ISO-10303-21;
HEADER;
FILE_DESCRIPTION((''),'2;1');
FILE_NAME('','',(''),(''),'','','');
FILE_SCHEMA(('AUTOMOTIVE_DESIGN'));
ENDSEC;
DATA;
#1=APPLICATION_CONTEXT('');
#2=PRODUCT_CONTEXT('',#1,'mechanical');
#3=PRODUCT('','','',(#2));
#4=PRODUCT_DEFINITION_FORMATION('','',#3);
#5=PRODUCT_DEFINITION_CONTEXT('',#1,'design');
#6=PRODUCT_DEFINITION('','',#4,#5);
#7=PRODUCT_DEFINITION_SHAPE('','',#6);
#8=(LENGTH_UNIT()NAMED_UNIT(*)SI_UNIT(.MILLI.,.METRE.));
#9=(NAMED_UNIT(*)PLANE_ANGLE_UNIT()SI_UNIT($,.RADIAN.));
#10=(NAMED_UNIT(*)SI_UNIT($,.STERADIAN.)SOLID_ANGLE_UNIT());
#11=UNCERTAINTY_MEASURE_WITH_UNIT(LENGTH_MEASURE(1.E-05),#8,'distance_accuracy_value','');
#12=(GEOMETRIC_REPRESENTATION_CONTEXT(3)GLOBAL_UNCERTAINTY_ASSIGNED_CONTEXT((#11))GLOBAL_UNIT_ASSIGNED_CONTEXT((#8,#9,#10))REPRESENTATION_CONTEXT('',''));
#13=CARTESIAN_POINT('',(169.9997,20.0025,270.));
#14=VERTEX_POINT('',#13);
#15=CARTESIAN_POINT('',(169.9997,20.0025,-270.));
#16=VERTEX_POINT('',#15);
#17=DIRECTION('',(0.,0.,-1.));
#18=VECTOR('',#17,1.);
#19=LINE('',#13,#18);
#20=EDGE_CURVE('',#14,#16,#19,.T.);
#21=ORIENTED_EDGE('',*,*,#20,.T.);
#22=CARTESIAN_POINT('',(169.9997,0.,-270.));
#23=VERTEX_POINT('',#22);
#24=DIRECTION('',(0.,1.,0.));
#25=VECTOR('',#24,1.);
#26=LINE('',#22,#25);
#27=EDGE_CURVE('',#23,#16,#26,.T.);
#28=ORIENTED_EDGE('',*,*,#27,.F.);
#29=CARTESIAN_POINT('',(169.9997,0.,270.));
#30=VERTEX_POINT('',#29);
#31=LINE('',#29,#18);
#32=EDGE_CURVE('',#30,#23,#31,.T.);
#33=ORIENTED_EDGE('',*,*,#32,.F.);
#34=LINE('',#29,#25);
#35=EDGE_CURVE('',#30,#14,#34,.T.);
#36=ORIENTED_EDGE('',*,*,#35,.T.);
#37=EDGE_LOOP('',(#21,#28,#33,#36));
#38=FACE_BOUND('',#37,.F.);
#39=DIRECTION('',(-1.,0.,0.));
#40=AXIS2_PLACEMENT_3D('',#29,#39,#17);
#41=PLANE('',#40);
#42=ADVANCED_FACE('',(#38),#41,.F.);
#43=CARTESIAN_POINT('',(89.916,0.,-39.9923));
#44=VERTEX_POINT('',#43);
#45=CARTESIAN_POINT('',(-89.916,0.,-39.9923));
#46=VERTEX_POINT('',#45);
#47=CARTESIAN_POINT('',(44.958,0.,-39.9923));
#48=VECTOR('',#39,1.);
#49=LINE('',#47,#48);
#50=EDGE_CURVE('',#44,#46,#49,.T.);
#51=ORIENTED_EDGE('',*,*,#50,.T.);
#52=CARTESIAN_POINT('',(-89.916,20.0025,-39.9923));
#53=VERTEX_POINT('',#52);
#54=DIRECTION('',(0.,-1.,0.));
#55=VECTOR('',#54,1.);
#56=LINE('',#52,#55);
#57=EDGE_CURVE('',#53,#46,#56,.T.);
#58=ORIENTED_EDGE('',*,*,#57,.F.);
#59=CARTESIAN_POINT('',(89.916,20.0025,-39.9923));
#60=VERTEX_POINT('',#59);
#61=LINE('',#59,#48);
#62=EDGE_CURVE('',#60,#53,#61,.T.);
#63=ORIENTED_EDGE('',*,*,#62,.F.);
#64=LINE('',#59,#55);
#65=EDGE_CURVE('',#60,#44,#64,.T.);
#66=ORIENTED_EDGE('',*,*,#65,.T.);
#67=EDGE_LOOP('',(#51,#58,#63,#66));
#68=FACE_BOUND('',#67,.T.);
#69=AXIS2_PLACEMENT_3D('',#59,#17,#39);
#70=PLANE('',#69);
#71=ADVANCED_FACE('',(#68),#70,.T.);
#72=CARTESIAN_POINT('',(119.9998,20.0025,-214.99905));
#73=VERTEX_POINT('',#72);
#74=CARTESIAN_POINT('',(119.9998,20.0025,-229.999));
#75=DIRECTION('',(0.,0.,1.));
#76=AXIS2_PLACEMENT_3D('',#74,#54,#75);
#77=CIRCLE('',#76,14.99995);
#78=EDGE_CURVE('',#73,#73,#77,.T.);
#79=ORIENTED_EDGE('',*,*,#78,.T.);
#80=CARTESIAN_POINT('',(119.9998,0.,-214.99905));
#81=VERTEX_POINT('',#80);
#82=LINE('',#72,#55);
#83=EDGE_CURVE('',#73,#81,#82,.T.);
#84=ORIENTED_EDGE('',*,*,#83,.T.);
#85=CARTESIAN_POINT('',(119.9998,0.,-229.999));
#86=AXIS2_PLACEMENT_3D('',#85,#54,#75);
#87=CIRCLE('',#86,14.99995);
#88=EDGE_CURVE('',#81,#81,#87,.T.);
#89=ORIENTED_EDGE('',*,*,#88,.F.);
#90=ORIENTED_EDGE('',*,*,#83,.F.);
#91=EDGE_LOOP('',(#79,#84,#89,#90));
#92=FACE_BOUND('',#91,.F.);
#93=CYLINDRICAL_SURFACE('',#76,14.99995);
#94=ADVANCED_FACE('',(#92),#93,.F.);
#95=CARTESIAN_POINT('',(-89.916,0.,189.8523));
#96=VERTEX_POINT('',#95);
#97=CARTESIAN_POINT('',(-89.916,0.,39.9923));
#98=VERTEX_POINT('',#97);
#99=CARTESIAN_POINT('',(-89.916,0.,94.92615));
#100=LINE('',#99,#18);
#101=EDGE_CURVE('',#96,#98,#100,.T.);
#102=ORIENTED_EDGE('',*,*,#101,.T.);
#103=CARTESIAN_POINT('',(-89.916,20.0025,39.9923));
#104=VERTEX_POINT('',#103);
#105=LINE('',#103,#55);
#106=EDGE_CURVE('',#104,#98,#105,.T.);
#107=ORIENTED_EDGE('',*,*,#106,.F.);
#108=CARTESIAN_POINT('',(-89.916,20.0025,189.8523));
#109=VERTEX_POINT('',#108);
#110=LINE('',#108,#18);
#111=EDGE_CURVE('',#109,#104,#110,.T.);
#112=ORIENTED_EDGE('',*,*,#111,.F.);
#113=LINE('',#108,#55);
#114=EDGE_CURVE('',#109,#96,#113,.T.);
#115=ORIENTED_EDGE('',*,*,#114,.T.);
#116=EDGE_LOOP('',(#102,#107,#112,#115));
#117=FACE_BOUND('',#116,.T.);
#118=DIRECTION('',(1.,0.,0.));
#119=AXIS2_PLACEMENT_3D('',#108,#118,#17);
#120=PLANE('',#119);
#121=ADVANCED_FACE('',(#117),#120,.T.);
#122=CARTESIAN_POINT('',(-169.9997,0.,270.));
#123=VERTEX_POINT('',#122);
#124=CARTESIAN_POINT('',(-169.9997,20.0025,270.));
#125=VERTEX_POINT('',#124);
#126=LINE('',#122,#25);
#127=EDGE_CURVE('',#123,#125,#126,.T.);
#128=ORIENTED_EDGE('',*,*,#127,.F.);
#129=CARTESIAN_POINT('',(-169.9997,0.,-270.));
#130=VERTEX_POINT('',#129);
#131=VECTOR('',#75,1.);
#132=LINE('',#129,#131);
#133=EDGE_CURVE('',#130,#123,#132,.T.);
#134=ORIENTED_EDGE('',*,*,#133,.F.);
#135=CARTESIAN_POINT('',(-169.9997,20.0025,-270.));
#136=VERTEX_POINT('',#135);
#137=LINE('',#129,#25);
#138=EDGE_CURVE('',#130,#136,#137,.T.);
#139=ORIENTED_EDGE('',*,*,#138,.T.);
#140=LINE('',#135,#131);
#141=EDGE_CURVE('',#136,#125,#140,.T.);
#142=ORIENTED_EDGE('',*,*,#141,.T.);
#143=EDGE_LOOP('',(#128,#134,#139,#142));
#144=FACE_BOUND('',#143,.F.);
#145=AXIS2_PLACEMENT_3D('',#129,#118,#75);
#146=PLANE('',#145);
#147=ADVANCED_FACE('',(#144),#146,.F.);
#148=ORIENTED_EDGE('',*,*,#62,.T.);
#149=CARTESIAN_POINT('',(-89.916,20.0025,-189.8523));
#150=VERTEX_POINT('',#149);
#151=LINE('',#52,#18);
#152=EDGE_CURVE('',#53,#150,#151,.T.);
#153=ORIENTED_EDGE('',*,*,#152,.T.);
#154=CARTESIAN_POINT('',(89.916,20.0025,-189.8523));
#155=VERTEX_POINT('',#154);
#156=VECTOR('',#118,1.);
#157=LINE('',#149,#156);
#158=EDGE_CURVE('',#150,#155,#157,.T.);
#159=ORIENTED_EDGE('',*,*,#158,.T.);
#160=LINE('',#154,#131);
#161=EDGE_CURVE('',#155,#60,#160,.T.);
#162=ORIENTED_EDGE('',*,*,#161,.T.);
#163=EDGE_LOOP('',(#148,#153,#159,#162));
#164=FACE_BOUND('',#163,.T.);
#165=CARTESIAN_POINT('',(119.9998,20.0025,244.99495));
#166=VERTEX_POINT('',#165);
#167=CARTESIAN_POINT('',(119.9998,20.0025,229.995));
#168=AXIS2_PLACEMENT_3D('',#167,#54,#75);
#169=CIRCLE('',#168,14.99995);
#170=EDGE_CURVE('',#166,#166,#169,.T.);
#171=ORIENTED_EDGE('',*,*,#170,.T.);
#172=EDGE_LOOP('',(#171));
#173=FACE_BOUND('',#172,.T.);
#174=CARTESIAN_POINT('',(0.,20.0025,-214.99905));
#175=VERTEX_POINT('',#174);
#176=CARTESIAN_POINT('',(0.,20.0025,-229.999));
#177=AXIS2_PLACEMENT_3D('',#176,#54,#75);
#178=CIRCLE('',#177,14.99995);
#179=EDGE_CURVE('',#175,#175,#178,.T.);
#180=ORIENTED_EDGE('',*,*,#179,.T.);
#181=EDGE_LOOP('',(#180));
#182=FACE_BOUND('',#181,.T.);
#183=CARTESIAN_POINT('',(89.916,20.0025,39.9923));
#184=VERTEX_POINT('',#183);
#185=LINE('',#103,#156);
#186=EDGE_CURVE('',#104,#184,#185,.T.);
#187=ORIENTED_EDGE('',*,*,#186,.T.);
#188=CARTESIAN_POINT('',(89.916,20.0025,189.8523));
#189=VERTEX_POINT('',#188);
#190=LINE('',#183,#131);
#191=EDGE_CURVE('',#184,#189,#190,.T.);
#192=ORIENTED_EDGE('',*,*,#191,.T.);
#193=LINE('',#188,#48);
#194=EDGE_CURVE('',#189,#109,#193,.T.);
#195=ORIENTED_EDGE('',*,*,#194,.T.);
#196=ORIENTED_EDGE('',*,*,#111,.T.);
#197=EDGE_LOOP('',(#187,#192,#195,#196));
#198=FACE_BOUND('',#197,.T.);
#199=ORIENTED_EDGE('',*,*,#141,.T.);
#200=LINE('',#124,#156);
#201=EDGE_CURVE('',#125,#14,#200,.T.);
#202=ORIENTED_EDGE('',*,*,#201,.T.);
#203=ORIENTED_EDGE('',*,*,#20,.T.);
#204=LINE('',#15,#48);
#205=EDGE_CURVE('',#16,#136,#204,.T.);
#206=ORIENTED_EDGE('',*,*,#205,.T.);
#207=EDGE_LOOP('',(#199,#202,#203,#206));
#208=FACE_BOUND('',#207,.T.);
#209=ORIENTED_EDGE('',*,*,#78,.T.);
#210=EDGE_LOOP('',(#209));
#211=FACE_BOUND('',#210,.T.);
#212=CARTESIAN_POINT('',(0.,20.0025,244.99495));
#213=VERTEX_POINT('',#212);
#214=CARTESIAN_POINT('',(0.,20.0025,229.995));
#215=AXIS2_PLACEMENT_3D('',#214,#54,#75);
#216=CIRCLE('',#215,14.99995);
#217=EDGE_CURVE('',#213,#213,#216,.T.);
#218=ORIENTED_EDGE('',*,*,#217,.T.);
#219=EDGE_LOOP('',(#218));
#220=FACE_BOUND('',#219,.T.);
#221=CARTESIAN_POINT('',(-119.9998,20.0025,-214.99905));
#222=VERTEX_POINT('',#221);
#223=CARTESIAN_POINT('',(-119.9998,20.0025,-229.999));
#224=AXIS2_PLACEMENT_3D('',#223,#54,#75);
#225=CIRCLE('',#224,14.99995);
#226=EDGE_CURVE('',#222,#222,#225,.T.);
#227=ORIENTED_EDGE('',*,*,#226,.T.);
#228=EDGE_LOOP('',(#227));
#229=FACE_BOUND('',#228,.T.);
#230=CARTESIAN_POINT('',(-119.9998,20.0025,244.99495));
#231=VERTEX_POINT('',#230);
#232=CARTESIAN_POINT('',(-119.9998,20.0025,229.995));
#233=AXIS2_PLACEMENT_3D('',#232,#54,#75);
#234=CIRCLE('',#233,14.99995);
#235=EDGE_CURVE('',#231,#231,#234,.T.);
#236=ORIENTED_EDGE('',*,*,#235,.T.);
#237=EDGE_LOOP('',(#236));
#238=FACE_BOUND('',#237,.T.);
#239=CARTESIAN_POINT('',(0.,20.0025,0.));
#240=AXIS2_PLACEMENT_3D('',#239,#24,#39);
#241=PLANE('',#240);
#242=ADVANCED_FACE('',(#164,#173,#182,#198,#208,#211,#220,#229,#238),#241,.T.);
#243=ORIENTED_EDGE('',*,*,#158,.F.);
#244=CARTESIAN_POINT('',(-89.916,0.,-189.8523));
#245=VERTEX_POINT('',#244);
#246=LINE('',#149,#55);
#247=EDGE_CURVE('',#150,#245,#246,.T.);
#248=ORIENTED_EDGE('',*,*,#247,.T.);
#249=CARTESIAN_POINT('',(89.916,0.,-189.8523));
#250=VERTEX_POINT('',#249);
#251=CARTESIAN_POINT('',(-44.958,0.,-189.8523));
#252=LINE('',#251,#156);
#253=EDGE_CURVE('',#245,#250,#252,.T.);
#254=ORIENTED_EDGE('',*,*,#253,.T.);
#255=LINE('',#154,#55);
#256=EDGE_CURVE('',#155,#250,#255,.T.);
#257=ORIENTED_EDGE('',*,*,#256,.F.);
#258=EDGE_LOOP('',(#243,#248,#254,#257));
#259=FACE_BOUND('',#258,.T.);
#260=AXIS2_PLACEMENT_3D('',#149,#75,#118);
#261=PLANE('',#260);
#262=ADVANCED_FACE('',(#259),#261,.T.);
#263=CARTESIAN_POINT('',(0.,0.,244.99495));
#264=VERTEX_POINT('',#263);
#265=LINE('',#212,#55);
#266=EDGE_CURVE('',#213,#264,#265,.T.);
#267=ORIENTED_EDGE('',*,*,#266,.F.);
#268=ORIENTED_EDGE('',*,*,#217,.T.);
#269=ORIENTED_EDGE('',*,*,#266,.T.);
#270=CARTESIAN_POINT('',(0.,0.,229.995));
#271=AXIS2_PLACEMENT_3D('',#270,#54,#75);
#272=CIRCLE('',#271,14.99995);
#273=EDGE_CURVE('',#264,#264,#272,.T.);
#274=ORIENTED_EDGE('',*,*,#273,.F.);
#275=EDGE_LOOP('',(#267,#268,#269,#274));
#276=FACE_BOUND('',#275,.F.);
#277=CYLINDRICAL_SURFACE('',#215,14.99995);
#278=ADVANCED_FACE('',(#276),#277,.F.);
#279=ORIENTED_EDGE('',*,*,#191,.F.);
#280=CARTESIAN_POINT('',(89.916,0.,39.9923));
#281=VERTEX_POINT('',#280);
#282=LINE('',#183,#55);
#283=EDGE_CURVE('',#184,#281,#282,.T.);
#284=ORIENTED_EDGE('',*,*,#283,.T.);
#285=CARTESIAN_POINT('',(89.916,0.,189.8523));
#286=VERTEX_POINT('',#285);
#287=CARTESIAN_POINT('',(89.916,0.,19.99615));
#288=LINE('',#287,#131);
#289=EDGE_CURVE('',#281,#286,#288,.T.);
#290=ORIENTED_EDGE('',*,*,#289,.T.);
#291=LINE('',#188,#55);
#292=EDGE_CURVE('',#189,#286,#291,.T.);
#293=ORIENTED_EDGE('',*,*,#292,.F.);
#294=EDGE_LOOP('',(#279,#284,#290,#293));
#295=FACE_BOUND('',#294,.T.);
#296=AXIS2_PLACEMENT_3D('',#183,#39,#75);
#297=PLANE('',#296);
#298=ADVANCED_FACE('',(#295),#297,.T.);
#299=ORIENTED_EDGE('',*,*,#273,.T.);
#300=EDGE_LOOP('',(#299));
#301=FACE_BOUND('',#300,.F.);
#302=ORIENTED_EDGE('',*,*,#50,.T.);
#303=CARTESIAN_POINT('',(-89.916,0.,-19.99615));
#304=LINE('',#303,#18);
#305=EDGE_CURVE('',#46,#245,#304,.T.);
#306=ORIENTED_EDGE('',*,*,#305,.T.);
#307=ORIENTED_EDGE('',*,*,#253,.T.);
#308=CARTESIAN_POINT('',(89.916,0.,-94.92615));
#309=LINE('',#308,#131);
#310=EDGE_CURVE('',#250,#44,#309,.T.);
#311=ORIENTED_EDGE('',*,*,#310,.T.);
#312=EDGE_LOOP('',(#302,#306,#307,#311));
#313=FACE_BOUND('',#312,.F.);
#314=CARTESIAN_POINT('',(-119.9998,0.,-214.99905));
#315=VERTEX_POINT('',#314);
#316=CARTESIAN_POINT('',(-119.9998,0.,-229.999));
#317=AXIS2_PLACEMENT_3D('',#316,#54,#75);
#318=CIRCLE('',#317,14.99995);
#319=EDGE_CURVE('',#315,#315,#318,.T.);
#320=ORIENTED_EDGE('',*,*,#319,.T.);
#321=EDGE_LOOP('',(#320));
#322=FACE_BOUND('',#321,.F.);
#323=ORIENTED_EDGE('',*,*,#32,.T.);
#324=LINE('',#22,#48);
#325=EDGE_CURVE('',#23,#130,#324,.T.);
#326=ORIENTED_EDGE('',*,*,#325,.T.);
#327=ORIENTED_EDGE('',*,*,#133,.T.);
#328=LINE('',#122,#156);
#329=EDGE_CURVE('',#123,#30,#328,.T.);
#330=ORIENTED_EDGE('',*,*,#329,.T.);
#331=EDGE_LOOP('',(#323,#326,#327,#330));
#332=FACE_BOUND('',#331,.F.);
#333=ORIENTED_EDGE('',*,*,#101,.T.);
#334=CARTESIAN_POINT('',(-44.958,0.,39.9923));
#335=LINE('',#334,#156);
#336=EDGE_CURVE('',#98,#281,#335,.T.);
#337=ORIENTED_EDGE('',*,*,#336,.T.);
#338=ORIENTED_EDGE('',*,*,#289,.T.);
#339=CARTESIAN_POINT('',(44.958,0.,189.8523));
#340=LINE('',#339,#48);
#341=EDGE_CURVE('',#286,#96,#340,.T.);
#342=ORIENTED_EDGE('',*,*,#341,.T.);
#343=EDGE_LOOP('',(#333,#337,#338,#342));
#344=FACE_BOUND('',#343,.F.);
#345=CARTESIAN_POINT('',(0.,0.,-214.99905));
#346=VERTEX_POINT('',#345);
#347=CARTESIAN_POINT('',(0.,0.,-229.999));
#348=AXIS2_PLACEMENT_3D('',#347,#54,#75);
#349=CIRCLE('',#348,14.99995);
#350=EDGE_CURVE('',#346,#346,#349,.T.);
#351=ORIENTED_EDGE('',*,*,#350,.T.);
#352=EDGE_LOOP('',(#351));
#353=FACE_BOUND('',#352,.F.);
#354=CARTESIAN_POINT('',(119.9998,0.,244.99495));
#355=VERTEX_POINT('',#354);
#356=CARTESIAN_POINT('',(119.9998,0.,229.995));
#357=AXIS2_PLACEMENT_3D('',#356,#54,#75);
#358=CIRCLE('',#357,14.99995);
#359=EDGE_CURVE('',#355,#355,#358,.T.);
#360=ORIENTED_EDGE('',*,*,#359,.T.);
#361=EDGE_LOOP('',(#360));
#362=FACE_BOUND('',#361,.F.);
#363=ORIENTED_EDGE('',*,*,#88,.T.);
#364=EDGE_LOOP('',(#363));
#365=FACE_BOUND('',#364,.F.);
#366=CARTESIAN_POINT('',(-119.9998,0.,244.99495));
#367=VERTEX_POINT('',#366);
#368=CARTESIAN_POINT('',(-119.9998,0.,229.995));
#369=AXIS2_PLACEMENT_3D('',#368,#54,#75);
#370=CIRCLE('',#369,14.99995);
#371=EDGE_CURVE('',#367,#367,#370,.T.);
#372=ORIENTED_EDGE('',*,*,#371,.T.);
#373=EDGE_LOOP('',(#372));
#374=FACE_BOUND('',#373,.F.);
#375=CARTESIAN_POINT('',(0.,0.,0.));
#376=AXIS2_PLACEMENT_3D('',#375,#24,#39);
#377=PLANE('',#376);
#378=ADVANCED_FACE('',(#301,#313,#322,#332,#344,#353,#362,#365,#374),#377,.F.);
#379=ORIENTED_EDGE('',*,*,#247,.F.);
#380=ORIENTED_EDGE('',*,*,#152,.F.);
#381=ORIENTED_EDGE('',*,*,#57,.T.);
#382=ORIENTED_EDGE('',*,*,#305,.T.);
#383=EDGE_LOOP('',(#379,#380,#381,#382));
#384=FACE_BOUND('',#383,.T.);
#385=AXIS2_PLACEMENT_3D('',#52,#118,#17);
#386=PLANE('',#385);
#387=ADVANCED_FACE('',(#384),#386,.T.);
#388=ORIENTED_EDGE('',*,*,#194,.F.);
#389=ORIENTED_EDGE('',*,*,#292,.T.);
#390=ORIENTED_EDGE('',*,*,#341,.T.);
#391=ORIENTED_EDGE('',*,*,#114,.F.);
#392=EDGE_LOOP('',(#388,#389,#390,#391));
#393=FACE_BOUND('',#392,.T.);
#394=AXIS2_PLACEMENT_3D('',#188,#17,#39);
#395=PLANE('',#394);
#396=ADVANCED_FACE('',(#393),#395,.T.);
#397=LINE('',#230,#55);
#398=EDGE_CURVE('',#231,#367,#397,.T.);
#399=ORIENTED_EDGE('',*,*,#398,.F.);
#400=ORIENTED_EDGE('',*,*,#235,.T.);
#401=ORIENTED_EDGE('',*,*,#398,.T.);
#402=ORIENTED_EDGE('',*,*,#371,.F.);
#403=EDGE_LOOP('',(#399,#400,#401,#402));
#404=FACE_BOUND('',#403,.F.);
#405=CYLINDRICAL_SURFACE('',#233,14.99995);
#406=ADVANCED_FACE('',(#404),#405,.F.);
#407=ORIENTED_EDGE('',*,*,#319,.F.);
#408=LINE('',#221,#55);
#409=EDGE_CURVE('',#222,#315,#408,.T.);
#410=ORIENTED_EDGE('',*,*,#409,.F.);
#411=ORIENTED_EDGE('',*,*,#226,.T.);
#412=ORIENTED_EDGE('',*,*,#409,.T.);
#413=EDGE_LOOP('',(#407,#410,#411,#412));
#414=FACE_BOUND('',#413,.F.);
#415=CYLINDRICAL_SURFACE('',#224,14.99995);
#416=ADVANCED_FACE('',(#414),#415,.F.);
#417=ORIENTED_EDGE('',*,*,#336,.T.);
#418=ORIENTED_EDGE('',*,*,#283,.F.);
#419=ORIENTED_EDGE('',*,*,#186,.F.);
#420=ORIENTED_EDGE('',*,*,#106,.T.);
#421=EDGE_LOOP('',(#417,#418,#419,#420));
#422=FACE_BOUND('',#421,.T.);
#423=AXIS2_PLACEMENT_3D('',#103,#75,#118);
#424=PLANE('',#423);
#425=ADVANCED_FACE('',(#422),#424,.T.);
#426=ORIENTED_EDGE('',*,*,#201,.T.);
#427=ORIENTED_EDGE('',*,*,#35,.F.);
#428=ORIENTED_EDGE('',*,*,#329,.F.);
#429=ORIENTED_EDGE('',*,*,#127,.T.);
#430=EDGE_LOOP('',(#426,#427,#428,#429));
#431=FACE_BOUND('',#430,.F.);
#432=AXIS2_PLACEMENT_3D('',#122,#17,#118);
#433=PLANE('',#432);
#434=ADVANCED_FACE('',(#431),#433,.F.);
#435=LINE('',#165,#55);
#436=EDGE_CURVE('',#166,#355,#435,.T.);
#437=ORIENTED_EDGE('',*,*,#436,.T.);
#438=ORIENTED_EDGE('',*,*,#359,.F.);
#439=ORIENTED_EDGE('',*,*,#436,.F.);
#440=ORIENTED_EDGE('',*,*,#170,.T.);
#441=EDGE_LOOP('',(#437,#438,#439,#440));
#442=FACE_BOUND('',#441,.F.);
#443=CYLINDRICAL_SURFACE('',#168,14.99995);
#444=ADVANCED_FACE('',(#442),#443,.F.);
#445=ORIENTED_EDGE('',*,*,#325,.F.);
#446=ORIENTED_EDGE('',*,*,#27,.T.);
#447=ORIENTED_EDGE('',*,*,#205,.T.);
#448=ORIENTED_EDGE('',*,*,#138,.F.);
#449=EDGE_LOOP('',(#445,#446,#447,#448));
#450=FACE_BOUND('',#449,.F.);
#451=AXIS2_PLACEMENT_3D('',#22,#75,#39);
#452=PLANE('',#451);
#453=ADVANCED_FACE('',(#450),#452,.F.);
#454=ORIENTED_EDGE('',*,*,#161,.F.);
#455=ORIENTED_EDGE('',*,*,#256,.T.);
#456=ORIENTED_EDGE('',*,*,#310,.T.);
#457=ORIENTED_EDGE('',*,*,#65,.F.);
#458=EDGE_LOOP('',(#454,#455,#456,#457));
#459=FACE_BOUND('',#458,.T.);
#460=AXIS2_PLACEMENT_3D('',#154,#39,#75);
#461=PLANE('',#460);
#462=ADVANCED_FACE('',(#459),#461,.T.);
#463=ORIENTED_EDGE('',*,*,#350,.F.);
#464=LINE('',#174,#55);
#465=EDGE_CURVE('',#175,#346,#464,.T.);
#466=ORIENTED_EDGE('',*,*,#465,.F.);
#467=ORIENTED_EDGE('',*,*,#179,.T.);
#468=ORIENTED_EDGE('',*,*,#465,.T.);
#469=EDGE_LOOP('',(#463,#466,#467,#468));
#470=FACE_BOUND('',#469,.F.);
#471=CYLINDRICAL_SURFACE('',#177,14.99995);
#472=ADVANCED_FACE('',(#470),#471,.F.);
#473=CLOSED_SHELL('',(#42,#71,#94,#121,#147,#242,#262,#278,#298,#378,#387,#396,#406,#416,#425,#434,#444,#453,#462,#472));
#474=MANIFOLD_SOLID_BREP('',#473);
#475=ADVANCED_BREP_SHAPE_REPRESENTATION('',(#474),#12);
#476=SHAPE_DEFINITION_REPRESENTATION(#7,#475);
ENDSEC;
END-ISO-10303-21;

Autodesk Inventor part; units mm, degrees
ref_plane "YZ Plane" through (0, 0, 0) normal (1, 0, 0) x (0, 1, 0)
ref_plane "XZ Plane" through (0, 0, 0) normal (0, 1, 0) x (-1, 0, 0)
ref_plane "XY Plane" through (0, 0, 0) normal (0, 0, 1) x (1, 0, 0)
sketch "Sketch1" plane through (0, 0, 0) normal (0, 1, 0) x (-1, 0, 0)
  line L0 (169.9997, 270) -> (-169.9997, 270)
  line L1 (-169.9997, 270) -> (-169.9997, -270)
  line L2 (-169.9997, -270) -> (169.9997, -270)
  line L3 (169.9997, -270) -> (169.9997, 270)
  line L4 (169.9997, 270) -> (-169.9997, -270) construction
  line L5 (-169.9997, 270) -> (169.9997, -270) construction
  point P0 (0, 0)
  dimension "d0" = 339.9993
  dimension "d1" = 539.9999
extrude "Extrusion1" add sketch "Sketch1" along normal blind 20.0025
sketch "Sketch2" plane through (0, 20.0025, 0) normal (0, 1, 0) x (1, 0, 0)
  line L0 (-89.916, 189.8523) -> (89.916, 189.8523)
  line L1 (89.916, 189.8523) -> (89.916, 39.9923)
  line L2 (89.916, 39.9923) -> (-89.916, 39.9923)
  line L3 (-89.916, 39.9923) -> (-89.916, 189.8523)
  line L4 (-89.916, 189.8523) -> (89.916, 39.9923) construction
  line L5 (89.916, 189.8523) -> (-89.916, 39.9923) construction
  line L6 (-89.916, -39.9923) -> (89.916, -39.9923)
  line L7 (89.916, -39.9923) -> (89.916, -189.8523)
  line L8 (89.916, -189.8523) -> (-89.916, -189.8523)
  line L9 (-89.916, -189.8523) -> (-89.916, -39.9923)
  line L10 (-89.916, -39.9923) -> (89.916, -189.8523) construction
  line L11 (89.916, -39.9923) -> (-89.916, -189.8523) construction
  line L12 (-169.9997, -270) -> (169.9997, -270) projected
  line L13 (0, 0) -> (-323.2387, 0) construction
  point P0 (0, 114.9223)
  point P1 (0, -114.9223)
  point P2 (0, -114.9223)
  dimension "d4" = 149.86
  dimension "d5" = 149.86
  dimension "d6" = 179.832
  dimension "d7" = 179.832
  dimension "d9" = 79.9846
extrude "Extrusion2" cut sketch "Sketch2" against normal through all
hole "Hole1" at (-119.9998, 20.0025, 229.995) direction (0, -1, 0) diameter 29.9999 end through all
pattern_linear "Rectangular Pattern1" count 2 spacing 459.994 along (0, 0, -1) count 3 spacing 119.9998 along (1, 0, 0) of "Hole1"
